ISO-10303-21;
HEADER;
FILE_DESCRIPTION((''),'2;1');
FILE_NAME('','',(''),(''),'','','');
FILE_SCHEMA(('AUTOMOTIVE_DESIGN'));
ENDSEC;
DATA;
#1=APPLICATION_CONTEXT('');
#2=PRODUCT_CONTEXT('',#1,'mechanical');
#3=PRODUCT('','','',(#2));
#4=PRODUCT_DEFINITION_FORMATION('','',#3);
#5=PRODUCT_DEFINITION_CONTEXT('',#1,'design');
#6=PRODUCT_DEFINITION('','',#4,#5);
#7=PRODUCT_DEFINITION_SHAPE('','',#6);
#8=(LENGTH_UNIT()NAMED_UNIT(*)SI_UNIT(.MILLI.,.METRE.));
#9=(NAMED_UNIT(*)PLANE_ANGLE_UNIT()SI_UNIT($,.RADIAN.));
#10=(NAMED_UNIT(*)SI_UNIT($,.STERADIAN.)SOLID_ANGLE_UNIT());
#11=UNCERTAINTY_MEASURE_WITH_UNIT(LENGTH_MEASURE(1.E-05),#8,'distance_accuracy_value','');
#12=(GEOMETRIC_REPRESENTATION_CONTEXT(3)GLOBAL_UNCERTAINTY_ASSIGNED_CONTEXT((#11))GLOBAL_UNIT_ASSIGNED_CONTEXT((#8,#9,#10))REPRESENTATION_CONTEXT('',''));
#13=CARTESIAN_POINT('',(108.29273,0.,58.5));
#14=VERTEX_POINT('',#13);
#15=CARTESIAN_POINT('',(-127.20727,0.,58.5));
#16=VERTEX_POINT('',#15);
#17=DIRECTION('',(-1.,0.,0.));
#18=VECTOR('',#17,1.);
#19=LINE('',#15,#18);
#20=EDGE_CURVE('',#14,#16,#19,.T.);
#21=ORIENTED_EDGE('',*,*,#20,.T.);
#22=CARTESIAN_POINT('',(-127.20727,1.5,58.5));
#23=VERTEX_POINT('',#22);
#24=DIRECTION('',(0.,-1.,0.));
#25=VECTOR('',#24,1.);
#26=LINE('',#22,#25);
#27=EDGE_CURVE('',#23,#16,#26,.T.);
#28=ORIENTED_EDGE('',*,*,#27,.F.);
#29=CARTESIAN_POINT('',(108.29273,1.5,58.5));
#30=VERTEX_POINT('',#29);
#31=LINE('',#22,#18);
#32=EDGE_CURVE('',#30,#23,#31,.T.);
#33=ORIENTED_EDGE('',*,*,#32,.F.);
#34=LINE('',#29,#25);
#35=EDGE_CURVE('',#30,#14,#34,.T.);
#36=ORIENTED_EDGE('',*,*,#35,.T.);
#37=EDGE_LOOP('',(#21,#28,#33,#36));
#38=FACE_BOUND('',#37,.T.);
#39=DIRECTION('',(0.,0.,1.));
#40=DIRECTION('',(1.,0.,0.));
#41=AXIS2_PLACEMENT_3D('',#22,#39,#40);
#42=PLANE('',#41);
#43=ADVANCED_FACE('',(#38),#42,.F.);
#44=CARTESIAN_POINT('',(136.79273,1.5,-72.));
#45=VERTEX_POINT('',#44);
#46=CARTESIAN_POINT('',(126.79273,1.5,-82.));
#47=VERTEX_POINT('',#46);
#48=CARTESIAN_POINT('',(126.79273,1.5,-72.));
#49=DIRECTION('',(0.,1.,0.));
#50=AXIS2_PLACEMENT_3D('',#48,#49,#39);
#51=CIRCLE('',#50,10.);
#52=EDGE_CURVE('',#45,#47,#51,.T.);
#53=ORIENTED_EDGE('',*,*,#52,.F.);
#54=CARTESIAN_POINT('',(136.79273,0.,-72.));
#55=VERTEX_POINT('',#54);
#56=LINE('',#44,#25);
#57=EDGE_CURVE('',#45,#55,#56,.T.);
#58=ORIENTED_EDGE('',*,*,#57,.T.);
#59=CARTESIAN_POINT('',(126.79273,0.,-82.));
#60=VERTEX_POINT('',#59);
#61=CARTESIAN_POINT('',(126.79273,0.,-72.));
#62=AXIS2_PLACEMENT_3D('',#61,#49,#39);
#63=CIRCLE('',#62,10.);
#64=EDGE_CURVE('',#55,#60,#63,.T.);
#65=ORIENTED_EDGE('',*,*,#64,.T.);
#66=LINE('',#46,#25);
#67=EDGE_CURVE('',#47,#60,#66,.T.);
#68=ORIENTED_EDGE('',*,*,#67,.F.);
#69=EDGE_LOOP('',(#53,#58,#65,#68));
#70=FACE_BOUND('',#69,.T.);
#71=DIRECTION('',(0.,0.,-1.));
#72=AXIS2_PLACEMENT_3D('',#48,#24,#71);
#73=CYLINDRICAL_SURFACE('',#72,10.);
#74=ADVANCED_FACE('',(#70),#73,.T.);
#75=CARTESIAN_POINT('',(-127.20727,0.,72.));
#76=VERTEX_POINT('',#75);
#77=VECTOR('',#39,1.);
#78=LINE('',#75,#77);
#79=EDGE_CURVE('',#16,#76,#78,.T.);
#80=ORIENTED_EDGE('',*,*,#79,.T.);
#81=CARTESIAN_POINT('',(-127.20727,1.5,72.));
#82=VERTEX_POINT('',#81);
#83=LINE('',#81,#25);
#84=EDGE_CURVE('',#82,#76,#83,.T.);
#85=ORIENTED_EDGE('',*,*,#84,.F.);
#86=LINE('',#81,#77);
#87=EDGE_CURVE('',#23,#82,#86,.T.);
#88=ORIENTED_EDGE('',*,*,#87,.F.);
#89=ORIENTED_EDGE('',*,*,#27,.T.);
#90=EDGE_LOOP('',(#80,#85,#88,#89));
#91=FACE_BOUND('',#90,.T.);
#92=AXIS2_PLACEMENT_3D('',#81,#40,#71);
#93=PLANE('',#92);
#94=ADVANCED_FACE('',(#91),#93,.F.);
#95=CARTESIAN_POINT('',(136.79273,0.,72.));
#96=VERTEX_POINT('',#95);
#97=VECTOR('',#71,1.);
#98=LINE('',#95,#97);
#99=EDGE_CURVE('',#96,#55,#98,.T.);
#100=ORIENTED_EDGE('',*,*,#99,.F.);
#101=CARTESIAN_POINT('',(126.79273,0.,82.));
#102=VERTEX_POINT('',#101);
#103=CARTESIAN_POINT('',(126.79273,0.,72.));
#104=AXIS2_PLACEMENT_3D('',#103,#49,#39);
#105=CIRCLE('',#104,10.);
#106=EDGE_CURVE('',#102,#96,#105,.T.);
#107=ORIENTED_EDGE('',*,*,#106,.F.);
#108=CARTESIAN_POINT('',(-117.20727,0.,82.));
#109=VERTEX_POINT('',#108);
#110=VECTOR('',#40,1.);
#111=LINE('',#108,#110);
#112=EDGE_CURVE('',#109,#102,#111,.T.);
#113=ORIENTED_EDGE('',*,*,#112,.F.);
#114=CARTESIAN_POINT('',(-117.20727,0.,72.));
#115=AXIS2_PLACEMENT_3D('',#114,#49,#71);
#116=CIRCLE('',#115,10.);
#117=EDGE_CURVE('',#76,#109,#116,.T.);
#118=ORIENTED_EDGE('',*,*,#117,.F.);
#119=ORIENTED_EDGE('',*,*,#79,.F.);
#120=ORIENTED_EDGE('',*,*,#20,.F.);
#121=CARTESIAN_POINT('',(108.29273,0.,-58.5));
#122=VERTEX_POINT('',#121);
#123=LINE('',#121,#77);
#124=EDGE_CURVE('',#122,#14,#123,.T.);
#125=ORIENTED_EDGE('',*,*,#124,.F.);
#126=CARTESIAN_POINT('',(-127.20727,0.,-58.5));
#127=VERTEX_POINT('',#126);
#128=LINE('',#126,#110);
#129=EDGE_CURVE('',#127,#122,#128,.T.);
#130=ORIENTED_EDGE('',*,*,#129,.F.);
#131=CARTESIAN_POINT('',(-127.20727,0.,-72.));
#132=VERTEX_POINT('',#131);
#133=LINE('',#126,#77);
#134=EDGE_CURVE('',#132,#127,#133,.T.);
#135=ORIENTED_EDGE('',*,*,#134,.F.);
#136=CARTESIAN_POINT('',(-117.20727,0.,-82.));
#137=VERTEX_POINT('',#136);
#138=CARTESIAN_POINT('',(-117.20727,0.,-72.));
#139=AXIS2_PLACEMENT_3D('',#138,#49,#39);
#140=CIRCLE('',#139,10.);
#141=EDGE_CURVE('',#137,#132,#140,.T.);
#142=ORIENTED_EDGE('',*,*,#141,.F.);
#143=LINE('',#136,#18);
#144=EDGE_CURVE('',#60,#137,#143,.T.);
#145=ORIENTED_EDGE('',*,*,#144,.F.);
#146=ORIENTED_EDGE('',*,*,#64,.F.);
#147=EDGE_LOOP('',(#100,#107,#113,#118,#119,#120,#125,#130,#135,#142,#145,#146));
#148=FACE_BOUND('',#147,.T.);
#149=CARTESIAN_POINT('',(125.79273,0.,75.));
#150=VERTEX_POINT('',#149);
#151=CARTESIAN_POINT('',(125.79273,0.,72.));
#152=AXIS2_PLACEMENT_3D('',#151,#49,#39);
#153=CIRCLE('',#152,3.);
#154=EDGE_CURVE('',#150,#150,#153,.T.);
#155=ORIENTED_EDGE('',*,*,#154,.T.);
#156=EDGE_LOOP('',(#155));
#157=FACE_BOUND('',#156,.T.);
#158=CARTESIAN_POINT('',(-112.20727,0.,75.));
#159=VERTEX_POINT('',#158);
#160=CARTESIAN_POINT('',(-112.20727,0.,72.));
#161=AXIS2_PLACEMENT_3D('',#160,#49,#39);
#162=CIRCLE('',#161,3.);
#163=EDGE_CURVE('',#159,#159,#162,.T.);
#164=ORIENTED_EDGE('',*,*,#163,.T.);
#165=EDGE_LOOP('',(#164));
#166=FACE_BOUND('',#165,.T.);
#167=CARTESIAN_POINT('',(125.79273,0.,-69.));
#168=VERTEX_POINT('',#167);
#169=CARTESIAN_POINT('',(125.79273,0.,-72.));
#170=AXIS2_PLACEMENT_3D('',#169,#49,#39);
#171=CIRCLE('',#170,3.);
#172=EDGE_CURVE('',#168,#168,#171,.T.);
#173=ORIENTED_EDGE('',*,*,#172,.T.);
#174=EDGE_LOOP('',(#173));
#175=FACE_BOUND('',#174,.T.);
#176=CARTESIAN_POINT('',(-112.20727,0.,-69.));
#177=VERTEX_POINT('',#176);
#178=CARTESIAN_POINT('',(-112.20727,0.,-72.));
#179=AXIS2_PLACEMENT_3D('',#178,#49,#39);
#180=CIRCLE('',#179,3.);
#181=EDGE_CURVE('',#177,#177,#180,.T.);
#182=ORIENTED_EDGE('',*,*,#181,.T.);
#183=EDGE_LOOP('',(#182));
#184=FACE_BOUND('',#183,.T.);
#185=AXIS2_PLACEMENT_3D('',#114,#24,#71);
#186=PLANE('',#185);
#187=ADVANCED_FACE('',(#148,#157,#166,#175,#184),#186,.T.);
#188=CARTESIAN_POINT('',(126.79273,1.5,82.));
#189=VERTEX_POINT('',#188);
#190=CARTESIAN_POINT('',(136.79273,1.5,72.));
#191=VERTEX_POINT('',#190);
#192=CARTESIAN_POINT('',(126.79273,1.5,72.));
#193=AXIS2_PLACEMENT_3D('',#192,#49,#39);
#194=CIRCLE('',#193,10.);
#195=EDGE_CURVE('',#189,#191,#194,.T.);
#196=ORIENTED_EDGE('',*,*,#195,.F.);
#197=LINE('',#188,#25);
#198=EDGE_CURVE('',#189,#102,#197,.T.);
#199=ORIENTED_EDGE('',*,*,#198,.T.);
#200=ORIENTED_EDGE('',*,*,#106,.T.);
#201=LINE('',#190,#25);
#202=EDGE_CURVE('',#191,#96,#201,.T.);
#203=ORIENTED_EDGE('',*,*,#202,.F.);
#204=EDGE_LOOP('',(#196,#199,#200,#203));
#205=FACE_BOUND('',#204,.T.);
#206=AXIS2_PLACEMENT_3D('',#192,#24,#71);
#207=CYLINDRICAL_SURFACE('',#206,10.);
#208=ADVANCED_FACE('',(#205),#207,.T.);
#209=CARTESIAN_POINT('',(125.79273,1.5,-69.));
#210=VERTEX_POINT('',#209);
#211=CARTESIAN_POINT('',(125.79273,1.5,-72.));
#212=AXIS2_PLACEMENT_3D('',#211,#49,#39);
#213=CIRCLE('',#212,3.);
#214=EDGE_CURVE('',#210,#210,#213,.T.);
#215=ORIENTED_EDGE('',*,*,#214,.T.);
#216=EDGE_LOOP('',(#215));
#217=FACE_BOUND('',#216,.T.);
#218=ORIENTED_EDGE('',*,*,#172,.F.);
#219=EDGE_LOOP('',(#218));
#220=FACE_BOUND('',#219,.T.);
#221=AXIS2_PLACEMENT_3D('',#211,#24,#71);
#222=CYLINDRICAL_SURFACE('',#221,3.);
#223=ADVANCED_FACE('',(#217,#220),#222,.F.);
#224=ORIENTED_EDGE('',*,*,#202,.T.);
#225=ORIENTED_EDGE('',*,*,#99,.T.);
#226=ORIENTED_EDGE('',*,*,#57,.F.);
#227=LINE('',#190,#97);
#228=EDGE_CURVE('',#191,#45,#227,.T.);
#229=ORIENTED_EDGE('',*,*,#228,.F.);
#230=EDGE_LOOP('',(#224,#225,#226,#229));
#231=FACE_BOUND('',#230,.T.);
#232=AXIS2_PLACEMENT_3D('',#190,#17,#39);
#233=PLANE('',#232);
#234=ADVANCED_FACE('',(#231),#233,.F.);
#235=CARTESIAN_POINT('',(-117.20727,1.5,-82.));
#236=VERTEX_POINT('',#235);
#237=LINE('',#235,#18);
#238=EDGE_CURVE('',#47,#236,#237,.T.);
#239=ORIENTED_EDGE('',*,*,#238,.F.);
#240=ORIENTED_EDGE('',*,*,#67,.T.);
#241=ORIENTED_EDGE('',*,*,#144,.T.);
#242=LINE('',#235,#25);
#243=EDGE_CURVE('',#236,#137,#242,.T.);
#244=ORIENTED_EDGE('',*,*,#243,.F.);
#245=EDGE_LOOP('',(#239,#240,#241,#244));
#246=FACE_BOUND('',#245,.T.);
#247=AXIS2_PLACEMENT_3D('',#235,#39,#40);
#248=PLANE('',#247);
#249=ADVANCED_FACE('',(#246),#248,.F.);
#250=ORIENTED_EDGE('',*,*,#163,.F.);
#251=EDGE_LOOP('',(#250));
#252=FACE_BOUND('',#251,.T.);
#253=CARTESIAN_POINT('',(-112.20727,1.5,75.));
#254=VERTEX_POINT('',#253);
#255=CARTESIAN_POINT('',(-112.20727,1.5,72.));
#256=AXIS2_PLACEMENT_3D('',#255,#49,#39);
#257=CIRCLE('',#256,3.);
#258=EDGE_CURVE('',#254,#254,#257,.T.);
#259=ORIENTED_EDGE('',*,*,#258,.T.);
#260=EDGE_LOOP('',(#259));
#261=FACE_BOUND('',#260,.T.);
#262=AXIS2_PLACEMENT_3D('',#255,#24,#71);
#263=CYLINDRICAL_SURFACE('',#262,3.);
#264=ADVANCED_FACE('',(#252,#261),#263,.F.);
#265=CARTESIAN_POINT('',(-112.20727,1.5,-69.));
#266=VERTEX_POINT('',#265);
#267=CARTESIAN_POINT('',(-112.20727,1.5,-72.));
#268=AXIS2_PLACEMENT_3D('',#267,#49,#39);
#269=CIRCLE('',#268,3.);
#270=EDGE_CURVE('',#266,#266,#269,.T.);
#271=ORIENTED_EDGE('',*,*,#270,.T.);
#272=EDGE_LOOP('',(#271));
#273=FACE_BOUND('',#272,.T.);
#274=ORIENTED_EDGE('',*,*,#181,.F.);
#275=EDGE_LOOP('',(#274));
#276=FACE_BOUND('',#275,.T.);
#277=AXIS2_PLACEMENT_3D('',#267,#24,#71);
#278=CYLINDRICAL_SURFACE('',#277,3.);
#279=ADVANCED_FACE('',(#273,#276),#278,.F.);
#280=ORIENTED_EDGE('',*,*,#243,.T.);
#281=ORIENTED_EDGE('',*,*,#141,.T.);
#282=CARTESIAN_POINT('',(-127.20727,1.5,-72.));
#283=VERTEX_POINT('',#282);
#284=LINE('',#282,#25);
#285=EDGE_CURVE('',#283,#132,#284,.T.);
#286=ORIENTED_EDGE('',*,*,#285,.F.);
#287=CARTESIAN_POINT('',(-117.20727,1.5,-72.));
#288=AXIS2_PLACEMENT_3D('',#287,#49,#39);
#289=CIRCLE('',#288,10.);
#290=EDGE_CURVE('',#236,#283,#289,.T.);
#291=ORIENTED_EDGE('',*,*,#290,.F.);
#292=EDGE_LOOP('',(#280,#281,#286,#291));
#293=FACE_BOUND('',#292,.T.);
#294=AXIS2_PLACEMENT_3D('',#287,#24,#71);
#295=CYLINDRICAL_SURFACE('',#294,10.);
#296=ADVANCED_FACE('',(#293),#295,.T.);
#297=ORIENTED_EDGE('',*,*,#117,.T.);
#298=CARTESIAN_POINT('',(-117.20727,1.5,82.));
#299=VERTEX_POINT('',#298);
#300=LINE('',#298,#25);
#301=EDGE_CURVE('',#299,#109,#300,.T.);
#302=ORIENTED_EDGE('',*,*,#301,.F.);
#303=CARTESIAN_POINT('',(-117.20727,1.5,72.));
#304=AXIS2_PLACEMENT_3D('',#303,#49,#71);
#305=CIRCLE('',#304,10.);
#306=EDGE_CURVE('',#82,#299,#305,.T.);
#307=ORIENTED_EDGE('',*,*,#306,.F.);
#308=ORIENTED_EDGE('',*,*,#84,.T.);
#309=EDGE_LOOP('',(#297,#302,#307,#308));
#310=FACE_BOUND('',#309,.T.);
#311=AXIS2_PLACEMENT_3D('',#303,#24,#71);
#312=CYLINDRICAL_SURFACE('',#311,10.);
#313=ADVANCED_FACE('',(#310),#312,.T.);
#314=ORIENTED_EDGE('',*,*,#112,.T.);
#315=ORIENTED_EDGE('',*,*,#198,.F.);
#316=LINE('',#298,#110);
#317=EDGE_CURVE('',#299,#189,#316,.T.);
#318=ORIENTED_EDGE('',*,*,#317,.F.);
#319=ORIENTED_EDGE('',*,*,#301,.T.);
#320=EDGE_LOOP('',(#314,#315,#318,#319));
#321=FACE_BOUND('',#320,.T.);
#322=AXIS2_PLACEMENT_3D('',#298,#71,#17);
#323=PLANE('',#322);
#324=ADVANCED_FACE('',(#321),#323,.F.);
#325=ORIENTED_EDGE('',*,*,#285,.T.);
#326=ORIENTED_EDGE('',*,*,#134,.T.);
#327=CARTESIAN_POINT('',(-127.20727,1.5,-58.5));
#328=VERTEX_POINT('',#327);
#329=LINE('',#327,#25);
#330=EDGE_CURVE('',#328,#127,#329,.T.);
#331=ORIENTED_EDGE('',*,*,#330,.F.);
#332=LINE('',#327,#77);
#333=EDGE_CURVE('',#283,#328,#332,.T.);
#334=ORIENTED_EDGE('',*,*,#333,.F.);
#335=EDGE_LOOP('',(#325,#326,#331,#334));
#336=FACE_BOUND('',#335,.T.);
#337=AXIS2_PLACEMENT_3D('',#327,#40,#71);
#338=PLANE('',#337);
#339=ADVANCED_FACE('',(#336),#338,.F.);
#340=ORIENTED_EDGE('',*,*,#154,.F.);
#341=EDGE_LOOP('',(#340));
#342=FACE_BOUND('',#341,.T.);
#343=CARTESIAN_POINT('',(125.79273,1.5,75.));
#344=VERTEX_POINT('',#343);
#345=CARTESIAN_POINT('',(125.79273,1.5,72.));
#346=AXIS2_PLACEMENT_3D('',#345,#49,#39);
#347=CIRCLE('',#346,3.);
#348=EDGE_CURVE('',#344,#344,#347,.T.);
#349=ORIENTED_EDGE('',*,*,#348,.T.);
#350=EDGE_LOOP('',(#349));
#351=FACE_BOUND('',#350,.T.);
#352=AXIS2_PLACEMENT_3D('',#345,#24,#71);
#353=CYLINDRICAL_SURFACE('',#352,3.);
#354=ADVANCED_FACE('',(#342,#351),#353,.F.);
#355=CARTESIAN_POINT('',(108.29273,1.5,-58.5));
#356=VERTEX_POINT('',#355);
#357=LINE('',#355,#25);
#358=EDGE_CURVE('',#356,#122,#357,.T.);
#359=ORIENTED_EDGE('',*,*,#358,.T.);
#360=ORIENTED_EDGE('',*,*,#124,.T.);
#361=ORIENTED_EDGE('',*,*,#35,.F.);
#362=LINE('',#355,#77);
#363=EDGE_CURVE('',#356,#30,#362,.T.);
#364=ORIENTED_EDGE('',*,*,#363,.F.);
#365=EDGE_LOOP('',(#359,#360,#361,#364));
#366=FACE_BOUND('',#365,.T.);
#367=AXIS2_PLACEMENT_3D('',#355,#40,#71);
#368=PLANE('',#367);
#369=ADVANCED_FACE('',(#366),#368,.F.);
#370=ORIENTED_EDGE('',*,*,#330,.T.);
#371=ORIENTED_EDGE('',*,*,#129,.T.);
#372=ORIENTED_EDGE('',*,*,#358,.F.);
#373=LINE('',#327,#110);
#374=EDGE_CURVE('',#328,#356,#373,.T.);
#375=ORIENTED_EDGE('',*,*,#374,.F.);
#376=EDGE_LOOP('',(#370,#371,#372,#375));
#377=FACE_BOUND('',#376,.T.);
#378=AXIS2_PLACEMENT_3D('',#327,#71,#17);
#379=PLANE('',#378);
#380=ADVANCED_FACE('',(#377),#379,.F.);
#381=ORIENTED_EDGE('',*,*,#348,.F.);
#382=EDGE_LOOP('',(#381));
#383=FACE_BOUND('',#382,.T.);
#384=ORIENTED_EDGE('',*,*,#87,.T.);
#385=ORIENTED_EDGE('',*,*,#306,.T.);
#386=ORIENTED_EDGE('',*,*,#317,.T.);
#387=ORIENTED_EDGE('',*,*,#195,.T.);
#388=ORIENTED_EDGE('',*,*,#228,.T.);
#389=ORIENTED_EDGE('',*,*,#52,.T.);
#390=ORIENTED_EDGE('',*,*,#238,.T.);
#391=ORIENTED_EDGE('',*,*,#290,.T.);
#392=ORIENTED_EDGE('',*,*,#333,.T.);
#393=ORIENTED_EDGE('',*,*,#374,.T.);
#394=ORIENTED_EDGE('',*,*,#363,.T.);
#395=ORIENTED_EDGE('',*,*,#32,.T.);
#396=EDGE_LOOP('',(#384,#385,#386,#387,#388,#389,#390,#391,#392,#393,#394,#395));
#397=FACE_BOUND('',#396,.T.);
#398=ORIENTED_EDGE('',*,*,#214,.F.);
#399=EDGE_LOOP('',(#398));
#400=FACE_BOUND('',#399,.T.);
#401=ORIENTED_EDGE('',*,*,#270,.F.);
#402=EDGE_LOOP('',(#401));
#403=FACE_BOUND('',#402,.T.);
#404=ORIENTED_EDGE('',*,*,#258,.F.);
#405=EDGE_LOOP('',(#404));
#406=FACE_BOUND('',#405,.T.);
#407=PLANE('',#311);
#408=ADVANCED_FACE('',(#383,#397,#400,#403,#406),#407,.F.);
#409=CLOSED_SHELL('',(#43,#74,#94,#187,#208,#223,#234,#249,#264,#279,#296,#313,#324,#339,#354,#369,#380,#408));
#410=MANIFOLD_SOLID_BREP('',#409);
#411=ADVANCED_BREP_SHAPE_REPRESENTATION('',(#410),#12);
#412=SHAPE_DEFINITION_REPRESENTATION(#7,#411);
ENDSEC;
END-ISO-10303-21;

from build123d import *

# Parameters (mm, degrees)
SKETCH1_R          = 3
BASE_FLANGE1_DEPTH = 1.5


# Sheet-metal steps are written as plain solids
with BuildPart() as part:
    # Sketch1 → Base-Flange1 (new body)
    with BuildSketch(Plane(origin=(0, 0, 0), x_dir=(1, 0, 0), z_dir=(0, 1, 0))):
        with BuildLine():
            Line((-127.207269821, 58.5), (-127.207269821, 72))
            ThreePointArc((-127.207269821, 72), (-124.278337633, 79.071067812), (-117.207269821, 82))
            Line((-117.207269821, 82), (126.792730179, 82))
            ThreePointArc((126.792730179, 82), (133.863797991, 79.071067812), (136.792730179, 72))
            Line((136.792730179, 72), (136.792730179, -72))
            ThreePointArc((136.792730179, -72), (133.863797991, -79.071067812), (126.792730179, -82))
            Line((126.792730179, -82), (-117.207269821, -82))
            ThreePointArc((-117.207269821, -82), (-124.278337633, -79.071067812), (-127.207269821, -72))
            Line((-127.207269821, -72), (-127.207269821, -58.5))
            Line((-127.207269821, -58.5), (108.292730179, -58.5))
            Line((108.292730179, -58.5), (108.292730179, 58.5))
            Line((108.292730179, 58.5), (-127.207269821, 58.5))
        make_face()
        with Locations(Location((125.792730179, 72, 0), (0, 0, 270))):
            Circle(SKETCH1_R, mode=Mode.SUBTRACT)
        with Locations(Location((-112.207269821, 72, 0), (0, 0, 270))):
            Circle(SKETCH1_R, mode=Mode.SUBTRACT)
        with Locations(Location((-112.207269821, -72, 0), (0, 0, 270))):
            Circle(SKETCH1_R, mode=Mode.SUBTRACT)
        with Locations(Location((125.792730179, -72, 0), (0, 0, 270))):
            Circle(SKETCH1_R, mode=Mode.SUBTRACT)
    extrude(amount=BASE_FLANGE1_DEPTH)


solid = part.part
